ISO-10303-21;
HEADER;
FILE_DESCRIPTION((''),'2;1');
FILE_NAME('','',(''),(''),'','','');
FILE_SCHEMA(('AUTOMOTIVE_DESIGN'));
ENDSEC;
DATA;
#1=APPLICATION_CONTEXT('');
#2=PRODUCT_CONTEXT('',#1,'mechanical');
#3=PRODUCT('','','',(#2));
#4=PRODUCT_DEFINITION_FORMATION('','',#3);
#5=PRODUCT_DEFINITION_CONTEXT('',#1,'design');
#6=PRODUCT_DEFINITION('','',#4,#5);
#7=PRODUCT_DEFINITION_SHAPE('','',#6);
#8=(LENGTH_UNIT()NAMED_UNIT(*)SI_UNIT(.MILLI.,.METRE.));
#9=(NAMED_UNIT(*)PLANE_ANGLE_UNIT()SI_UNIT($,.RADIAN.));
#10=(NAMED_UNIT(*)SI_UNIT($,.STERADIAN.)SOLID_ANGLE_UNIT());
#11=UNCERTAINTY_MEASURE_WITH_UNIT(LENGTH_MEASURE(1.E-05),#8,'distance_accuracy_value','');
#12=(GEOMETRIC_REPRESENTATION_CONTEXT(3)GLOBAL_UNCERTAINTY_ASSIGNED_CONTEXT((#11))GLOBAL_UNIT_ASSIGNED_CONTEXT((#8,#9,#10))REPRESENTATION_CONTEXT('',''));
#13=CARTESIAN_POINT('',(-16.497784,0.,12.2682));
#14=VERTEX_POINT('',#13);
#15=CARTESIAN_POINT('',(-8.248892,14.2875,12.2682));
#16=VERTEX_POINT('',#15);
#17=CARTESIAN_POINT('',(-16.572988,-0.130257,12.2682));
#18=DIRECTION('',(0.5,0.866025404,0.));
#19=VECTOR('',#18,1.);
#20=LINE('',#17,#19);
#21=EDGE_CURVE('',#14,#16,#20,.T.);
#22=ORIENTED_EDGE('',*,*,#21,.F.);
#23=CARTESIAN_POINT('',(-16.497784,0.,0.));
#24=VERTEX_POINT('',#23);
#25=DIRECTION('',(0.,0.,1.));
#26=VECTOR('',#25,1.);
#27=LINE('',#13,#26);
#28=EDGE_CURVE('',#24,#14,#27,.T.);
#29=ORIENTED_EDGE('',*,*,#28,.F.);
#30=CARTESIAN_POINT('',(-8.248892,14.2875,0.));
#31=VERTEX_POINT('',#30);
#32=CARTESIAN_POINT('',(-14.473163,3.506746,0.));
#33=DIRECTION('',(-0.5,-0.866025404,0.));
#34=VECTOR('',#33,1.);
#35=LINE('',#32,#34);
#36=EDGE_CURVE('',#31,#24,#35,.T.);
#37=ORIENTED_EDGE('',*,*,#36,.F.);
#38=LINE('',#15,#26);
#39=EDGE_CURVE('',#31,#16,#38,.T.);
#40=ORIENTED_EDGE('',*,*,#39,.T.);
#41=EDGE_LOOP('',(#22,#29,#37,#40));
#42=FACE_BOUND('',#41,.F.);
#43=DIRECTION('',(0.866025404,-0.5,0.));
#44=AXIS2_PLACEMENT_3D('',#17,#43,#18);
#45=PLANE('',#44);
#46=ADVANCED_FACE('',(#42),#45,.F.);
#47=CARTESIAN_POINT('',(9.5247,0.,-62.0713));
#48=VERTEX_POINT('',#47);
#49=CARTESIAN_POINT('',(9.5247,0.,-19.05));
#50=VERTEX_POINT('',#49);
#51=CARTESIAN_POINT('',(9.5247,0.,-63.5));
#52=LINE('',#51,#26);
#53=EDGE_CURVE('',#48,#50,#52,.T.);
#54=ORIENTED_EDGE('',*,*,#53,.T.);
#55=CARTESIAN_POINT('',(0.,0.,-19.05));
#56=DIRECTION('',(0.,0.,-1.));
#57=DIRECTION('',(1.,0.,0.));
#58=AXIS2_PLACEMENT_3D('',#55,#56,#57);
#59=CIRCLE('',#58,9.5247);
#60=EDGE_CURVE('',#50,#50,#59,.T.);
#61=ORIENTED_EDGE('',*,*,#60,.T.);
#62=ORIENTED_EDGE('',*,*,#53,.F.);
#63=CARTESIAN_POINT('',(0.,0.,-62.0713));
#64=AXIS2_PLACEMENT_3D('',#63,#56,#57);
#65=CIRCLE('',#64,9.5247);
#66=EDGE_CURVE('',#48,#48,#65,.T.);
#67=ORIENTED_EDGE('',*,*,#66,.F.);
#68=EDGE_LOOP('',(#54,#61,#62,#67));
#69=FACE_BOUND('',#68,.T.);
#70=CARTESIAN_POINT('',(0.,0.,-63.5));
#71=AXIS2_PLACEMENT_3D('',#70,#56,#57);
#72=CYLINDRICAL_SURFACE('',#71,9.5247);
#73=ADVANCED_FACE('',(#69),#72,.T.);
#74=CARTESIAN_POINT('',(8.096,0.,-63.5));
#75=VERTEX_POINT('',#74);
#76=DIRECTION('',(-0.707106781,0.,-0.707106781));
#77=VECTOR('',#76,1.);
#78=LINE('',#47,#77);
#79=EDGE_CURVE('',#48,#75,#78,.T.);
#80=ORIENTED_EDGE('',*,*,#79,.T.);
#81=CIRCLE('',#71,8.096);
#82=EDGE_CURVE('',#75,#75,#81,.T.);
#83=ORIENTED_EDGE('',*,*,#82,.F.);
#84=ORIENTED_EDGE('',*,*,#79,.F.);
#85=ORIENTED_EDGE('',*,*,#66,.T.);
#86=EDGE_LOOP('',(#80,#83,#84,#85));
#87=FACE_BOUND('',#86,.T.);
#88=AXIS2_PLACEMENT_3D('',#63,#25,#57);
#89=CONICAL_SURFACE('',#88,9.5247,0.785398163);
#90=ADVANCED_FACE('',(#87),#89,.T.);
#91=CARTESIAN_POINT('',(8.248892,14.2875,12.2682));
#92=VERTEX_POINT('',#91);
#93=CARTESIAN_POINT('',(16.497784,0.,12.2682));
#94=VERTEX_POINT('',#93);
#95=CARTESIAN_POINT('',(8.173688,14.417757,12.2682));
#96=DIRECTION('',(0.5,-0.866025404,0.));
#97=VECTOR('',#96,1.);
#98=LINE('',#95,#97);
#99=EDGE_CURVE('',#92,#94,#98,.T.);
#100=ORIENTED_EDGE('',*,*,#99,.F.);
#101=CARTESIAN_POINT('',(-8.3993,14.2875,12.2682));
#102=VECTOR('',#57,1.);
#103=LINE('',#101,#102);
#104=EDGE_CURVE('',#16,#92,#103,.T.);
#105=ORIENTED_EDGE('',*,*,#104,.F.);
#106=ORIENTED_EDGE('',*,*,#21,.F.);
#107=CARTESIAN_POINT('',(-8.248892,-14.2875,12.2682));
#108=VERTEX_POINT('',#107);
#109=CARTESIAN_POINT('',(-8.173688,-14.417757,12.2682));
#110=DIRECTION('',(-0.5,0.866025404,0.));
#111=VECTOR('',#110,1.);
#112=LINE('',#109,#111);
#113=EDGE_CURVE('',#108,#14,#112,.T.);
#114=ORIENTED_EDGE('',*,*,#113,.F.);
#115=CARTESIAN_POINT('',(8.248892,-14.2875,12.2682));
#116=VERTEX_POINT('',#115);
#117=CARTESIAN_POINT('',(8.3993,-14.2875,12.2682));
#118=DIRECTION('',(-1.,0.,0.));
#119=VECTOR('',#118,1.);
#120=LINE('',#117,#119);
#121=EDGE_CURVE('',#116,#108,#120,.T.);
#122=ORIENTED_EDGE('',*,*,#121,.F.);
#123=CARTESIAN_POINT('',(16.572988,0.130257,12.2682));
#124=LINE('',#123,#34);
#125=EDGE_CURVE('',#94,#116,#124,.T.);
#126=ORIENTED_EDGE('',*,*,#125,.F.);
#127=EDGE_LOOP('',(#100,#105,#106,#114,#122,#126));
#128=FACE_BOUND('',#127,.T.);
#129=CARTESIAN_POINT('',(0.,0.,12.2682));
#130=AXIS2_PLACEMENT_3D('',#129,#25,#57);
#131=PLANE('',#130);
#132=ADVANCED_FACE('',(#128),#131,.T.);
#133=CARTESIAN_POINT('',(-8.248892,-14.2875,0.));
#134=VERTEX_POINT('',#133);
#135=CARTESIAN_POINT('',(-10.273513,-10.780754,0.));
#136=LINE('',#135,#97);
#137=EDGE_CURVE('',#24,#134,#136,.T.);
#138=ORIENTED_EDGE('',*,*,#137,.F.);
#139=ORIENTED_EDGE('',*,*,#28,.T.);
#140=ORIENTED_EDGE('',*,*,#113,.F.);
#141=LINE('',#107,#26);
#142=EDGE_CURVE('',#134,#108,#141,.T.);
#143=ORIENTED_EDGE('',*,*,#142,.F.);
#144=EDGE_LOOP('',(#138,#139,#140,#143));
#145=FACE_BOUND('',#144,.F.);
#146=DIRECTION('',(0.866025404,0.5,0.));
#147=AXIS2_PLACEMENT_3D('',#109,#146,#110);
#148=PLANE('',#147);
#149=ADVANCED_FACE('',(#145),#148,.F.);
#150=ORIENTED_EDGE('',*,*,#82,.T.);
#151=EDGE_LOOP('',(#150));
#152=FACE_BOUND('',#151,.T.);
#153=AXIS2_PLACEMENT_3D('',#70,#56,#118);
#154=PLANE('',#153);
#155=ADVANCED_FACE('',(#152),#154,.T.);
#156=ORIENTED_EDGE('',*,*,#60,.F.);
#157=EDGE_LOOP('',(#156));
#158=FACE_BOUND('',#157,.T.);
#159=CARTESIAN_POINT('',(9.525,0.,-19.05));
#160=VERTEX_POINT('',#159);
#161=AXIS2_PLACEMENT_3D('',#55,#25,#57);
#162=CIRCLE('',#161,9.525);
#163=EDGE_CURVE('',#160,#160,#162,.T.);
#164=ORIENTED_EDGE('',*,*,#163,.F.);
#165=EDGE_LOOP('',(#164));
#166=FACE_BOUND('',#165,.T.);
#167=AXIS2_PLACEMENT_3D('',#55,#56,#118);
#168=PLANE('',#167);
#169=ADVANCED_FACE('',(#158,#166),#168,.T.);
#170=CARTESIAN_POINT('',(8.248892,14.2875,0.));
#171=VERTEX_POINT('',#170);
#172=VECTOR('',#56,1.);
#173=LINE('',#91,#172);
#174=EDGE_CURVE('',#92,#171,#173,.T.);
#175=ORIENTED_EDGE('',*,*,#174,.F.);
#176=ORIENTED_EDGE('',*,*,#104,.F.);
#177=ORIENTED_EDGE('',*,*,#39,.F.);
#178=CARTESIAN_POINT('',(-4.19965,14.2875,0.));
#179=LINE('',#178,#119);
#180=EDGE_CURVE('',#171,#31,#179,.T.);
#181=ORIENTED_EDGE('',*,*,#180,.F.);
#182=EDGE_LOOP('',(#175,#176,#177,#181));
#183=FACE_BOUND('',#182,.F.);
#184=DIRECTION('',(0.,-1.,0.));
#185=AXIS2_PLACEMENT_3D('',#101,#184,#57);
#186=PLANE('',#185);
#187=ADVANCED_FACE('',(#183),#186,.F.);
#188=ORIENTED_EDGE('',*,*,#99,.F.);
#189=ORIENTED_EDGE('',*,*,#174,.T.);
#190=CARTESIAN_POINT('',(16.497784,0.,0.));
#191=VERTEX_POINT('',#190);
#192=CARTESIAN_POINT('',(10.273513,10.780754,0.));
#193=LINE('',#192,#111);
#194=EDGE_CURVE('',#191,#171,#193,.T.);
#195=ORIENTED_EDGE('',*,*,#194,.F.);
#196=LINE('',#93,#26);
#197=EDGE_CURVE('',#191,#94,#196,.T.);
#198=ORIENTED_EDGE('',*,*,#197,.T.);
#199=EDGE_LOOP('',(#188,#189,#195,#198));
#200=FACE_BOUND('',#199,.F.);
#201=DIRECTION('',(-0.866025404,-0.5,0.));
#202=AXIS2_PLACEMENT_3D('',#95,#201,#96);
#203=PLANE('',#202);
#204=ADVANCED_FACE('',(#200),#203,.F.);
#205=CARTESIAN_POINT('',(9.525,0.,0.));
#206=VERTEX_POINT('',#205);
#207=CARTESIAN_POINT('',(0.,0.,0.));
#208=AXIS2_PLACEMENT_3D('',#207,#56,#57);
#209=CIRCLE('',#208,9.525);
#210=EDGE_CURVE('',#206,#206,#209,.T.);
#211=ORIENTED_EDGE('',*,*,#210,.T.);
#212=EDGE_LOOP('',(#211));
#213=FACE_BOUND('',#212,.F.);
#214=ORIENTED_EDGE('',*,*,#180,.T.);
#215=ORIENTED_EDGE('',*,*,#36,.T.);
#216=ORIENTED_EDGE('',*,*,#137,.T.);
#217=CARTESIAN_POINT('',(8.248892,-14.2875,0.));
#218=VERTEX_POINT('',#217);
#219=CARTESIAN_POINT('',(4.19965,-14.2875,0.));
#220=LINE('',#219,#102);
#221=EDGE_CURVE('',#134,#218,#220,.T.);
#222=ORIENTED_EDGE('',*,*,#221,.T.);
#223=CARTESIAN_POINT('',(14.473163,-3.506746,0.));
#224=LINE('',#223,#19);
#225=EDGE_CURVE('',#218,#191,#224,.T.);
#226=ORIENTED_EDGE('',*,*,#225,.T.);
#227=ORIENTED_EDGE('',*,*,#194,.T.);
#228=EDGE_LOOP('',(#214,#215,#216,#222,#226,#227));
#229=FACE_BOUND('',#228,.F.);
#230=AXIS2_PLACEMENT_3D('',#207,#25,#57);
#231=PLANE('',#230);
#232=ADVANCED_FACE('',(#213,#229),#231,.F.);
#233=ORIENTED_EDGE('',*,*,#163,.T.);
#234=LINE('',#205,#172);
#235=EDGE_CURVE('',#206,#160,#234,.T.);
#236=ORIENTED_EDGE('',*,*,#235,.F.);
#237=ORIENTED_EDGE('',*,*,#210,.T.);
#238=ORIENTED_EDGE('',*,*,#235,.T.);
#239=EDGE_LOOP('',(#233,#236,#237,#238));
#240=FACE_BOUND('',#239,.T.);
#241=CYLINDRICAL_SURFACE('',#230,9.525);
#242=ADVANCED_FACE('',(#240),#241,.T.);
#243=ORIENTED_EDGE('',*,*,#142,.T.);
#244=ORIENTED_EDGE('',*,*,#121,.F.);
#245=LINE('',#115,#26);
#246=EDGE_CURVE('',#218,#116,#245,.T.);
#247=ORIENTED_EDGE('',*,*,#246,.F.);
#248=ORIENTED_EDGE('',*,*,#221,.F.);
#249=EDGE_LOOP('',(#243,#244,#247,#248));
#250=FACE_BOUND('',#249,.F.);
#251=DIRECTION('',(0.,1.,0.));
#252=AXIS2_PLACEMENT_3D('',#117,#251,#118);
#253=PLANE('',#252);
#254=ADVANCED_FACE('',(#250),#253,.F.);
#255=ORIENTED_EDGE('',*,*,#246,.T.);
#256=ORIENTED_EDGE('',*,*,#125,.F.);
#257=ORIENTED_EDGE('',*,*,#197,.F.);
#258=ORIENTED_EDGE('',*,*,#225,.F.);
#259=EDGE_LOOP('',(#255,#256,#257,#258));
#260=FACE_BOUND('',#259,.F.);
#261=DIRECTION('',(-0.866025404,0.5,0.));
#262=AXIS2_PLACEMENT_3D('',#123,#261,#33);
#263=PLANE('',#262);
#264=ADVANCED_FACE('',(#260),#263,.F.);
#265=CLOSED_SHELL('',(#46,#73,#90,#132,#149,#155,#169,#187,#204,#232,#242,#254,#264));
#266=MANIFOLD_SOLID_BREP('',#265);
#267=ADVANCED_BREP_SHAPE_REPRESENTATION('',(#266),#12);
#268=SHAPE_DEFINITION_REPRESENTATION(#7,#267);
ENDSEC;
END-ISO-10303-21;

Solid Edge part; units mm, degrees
sketch "Sketch1" plane through (0, 0, 0) normal (0, 0, 1) x (1, 0, 0)
  circle A0 centre (0, 0) radius 16.5735
  dimension "D1" = 33.147
extrude "Protrusion1" add sketch "Sketch1" along normal blind 12.2682
sketch "Sketch2" plane through (0, 0, 0) normal (0, 0, -1) x (1, 0, 0)
  circle A0 centre (0, 0) radius 9.525
extrude "Protrusion2" add sketch "Sketch2" along normal blind 63.5
sketch "Sketch3" plane through (0, 0, -63.5) normal (0, 0, -1) x (1, 0, 0)
  circle A0 centre (0, 0) radius 9.5247
extrude "Cutout1" cut sketch "Sketch3" against normal blind 44.45 flip side to cut
chamfer "Chamfer_1" distance 1.4287 angle 45 1 edges at (-9.5247, 0, -63.5)
sketch "Sketch4" plane through (0, 0, 12.2682) normal (0, 0, 1) x (1, 0, 0)
  line L0 (-8.3993, 14.2875) -> (8.3993, 14.2875)
  dimension "D1" = 28.575
extrude "Cutout2" cut sketch "Sketch4" against normal up to next material side at (0, 14.3375, 12.2682)
pattern_circular "Pattern1" count 6 over 360 about axis through (0, 0, 12.2682) along (0, 0, 1) of "Cutout2"
properties part number "24105320"
